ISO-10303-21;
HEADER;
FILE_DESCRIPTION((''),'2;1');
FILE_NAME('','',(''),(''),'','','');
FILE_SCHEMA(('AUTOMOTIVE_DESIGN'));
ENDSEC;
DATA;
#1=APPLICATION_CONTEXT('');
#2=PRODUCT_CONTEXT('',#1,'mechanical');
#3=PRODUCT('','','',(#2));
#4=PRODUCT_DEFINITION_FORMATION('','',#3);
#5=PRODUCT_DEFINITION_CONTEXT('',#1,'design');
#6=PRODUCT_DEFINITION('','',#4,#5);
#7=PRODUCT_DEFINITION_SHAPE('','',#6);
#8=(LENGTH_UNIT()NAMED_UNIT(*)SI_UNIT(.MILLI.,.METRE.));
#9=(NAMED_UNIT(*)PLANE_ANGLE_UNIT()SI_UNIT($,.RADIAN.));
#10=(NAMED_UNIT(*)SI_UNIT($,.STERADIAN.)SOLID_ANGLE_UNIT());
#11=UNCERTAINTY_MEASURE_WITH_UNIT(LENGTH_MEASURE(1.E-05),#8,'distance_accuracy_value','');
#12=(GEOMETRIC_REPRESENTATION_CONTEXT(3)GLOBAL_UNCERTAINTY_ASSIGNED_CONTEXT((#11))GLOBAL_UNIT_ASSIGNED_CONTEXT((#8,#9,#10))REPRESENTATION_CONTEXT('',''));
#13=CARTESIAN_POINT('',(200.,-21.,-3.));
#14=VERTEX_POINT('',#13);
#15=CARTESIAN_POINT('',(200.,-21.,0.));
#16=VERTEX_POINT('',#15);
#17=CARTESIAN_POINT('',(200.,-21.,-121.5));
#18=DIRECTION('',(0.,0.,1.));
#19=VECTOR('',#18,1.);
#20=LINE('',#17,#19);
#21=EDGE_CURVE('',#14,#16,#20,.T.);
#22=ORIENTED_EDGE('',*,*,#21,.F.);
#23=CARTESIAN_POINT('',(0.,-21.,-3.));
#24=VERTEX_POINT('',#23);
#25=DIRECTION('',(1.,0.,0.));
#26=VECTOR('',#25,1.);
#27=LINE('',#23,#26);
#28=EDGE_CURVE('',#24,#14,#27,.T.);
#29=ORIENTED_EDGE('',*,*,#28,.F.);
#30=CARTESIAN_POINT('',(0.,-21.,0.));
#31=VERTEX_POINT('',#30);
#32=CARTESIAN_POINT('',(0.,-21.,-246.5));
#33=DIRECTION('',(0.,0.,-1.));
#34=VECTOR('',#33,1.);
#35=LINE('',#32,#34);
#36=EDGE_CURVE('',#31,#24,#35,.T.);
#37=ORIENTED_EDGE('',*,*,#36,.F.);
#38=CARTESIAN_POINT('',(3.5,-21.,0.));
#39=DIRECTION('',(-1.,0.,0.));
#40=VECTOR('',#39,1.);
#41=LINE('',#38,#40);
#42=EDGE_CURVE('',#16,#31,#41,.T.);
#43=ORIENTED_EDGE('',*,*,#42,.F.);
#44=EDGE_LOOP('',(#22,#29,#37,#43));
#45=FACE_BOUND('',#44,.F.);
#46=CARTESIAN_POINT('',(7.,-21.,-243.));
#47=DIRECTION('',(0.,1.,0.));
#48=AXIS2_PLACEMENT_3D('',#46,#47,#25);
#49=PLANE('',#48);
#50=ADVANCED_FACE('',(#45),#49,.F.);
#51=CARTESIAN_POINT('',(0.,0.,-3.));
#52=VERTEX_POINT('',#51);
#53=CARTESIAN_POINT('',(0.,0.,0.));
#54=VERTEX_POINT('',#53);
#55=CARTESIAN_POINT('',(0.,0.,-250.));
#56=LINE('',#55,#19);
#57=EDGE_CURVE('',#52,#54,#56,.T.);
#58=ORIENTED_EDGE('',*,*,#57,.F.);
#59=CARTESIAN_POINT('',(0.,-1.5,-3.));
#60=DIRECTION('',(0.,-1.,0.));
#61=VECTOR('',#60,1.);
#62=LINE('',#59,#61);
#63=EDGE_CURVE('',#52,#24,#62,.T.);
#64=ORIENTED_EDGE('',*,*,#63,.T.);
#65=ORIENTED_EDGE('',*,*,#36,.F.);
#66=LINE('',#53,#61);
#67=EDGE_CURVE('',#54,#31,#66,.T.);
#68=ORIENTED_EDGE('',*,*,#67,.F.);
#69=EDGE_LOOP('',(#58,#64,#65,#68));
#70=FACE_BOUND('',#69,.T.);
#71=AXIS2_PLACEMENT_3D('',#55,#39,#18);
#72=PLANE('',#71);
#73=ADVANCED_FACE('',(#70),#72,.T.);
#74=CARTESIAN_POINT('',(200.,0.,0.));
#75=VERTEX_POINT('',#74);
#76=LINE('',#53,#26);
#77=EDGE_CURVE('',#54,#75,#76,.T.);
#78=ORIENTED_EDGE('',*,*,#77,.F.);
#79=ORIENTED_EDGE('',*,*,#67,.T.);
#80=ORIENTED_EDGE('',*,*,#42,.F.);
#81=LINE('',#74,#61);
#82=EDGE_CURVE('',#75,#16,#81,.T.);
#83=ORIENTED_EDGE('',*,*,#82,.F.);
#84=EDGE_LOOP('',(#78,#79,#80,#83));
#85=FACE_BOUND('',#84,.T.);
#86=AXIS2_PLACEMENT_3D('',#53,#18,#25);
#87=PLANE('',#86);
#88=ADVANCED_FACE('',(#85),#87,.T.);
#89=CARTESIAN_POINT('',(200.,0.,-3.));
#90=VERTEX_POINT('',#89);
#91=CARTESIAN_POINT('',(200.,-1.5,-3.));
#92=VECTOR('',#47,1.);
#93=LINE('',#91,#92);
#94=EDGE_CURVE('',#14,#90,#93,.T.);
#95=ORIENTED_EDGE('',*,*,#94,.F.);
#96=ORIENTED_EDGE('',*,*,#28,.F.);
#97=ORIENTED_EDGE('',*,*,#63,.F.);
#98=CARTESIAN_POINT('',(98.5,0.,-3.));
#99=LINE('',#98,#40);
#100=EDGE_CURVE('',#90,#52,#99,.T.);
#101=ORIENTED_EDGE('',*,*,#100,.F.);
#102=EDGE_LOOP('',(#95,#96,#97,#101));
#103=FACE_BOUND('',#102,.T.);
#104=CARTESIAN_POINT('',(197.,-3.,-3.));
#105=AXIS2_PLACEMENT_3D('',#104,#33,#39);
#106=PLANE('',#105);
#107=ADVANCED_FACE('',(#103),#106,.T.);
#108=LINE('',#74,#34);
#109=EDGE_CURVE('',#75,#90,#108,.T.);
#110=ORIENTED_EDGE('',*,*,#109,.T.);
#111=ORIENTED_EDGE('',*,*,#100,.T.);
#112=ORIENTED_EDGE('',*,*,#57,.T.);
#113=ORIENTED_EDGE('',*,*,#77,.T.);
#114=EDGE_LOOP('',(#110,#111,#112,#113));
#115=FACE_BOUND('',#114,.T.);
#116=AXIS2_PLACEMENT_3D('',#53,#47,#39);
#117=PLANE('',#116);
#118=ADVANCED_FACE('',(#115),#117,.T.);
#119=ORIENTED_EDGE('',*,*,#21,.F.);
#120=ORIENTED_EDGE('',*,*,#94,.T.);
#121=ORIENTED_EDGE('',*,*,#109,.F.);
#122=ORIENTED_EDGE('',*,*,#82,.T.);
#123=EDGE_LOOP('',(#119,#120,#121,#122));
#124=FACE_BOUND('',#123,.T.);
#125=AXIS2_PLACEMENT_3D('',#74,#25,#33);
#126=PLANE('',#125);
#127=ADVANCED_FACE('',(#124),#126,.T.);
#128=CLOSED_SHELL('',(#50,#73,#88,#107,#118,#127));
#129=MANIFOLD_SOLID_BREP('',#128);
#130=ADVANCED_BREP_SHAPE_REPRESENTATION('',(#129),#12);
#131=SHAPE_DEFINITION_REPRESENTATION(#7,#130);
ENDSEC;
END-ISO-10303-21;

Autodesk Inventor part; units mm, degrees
ref_plane "YZ Plane" through (0, 0, 0) normal (1, 0, 0) x (0, 1, 0)
ref_plane "XZ Plane" through (0, 0, 0) normal (0, 1, 0) x (-1, 0, 0)
ref_plane "XY Plane" through (0, 0, 0) normal (0, 0, 1) x (1, 0, 0)
sketch "block" plane through (0, 0, 0) normal (0, 1, 0) x (-1, 0, 0)
  line L0 (0, 0) -> (-200, 0)
  line L1 (-200, 0) -> (-200, -250)
  line L2 (-200, -250) -> (0, -250)
  line L3 (0, -250) -> (0, 0)
  dimension "d31" = 200
  dimension "d32" = 250
extrude "ext_block" add sketch "block" against normal blind 24
shell "Shell2" thickness 3 removed faces 0
sketch "lines_base" plane through (0, 0, 0) normal (0, 1, 0) x (-1, 0, 0)
  line L0 (0, 0) -> (-200, 0)
  line L1 (-200, 0) -> (-200, -250)
  line L2 (-200, -250) -> (0, -250)
  line L3 (0, -250) -> (0, 0)
  circle A0 centre (-65, -60) radius 6
  circle A1 centre (-125, -80) radius 6
  circle A2 centre (-65, -60) radius 12.5
  circle A3 centre (-65, -60) radius 8.5
  circle A4 centre (-125, -80) radius 8.5
  circle A5 centre (-125, -80) radius 12.5
  circle A6 centre (-175, -125) radius 3
  line L4 (-175, -125) -> (-175, -209)
  line L5 (-175, -125) -> (-91, -125) construction
  circle A7 centre (-175, -139) radius 3
  circle A8 centre (-175, -153) radius 3
  circle A9 centre (-175, -167) radius 3
  circle A10 centre (-175, -181) radius 3
  circle A11 centre (-175, -195) radius 3
  circle A12 centre (-175, -209) radius 3
  circle A13 centre (-95, -185) radius 2.5
  circle A14 centre (-95, -185) radius 5
  point P0 (-200, -125)
  dimension "d0" = 200
  dimension "d1" = 250
  dimension "d2" = 12
  dimension "d3" = 12
  dimension "d4" = 25
  dimension "d5" = 17
  dimension "d6" = 17
  dimension "d7" = 25
  dimension "d8" = 75
  dimension "d9" = 80
  dimension "d10" = 65
  dimension "d11" = 60
  dimension "d12" = 6
  dimension "d13" = 84
  dimension "d14" = 90
  dimension "d15" = 25
  dimension "d16" = 125
  dimension "d19" = 14
  dimension "d24" = 5
  dimension "d25" = 10
  dimension "d26" = 65
  dimension "d27" = 95
extrude "holes" cut sketch "lines_base" against normal up to surface (3 mm away) contours A0 | A1 | A6 | A7 L4 | L4 A7 | A8 L4 | L4 A8 | A9 L4 | L4 A9 | A10 L4 | L4 A10 | A11 L4 | L4 A11 | A12 | A13
sketch "Sketch4" plane through (200, 0, -250) normal (0, 0, -1) x (-1, 0, 0)
  line L0 (188, -4) -> (169, -4)
  line L1 (169, -4) -> (169, -17)
  line L2 (169, -17) -> (188, -17)
  line L3 (188, -17) -> (188, -4)
  line L4 (0, 0) -> (200, 0) projected
  line L5 (200, 0) -> (200, -24) projected
  dimension "d40" = 19
  dimension "d41" = 13
  dimension "d42" = 4
  dimension "d43" = 12
extrude "pwr_button_hole" cut sketch "Sketch4" against normal up to surface (3 mm away)
ref_plane "Work Plane1" through (7, -21, -243) normal (0, 1, 0) x (1, 0, 0)
sketch "Sketch5" plane through (7, -21, -243) normal (0, 1, 0) x (1, 0, 0)
  line L0 (-20.9366, 21.7948) -> (229.9216, 21.7948)
  line L1 (229.9216, 21.7948) -> (229.9216, -260.9184)
  line L2 (229.9216, -260.9184) -> (-20.9366, -260.9184)
  line L3 (-20.9366, -260.9184) -> (-20.9366, 21.7948)
  point P0 (-7, -243)
extrude "back_cover_cut" cut sketch "Sketch5" against normal through all
sketch "Sketch8" plane through (197, -3, -3) normal (0, 0, -1) x (-1, 0, 0)
  line L0 (-20.5673, 18.4526) -> (237.6144, 18.4526)
  line L1 (237.6144, 18.4526) -> (237.6144, -33.7854)
  line L2 (237.6144, -33.7854) -> (-20.5673, -33.7854)
  line L3 (-20.5673, -33.7854) -> (-20.5673, 18.4526)
  point P0 (197, 3)
extrude "Extrusion8" cut sketch "Sketch8" along normal through all
properties part number "side_left" material "Glass"
